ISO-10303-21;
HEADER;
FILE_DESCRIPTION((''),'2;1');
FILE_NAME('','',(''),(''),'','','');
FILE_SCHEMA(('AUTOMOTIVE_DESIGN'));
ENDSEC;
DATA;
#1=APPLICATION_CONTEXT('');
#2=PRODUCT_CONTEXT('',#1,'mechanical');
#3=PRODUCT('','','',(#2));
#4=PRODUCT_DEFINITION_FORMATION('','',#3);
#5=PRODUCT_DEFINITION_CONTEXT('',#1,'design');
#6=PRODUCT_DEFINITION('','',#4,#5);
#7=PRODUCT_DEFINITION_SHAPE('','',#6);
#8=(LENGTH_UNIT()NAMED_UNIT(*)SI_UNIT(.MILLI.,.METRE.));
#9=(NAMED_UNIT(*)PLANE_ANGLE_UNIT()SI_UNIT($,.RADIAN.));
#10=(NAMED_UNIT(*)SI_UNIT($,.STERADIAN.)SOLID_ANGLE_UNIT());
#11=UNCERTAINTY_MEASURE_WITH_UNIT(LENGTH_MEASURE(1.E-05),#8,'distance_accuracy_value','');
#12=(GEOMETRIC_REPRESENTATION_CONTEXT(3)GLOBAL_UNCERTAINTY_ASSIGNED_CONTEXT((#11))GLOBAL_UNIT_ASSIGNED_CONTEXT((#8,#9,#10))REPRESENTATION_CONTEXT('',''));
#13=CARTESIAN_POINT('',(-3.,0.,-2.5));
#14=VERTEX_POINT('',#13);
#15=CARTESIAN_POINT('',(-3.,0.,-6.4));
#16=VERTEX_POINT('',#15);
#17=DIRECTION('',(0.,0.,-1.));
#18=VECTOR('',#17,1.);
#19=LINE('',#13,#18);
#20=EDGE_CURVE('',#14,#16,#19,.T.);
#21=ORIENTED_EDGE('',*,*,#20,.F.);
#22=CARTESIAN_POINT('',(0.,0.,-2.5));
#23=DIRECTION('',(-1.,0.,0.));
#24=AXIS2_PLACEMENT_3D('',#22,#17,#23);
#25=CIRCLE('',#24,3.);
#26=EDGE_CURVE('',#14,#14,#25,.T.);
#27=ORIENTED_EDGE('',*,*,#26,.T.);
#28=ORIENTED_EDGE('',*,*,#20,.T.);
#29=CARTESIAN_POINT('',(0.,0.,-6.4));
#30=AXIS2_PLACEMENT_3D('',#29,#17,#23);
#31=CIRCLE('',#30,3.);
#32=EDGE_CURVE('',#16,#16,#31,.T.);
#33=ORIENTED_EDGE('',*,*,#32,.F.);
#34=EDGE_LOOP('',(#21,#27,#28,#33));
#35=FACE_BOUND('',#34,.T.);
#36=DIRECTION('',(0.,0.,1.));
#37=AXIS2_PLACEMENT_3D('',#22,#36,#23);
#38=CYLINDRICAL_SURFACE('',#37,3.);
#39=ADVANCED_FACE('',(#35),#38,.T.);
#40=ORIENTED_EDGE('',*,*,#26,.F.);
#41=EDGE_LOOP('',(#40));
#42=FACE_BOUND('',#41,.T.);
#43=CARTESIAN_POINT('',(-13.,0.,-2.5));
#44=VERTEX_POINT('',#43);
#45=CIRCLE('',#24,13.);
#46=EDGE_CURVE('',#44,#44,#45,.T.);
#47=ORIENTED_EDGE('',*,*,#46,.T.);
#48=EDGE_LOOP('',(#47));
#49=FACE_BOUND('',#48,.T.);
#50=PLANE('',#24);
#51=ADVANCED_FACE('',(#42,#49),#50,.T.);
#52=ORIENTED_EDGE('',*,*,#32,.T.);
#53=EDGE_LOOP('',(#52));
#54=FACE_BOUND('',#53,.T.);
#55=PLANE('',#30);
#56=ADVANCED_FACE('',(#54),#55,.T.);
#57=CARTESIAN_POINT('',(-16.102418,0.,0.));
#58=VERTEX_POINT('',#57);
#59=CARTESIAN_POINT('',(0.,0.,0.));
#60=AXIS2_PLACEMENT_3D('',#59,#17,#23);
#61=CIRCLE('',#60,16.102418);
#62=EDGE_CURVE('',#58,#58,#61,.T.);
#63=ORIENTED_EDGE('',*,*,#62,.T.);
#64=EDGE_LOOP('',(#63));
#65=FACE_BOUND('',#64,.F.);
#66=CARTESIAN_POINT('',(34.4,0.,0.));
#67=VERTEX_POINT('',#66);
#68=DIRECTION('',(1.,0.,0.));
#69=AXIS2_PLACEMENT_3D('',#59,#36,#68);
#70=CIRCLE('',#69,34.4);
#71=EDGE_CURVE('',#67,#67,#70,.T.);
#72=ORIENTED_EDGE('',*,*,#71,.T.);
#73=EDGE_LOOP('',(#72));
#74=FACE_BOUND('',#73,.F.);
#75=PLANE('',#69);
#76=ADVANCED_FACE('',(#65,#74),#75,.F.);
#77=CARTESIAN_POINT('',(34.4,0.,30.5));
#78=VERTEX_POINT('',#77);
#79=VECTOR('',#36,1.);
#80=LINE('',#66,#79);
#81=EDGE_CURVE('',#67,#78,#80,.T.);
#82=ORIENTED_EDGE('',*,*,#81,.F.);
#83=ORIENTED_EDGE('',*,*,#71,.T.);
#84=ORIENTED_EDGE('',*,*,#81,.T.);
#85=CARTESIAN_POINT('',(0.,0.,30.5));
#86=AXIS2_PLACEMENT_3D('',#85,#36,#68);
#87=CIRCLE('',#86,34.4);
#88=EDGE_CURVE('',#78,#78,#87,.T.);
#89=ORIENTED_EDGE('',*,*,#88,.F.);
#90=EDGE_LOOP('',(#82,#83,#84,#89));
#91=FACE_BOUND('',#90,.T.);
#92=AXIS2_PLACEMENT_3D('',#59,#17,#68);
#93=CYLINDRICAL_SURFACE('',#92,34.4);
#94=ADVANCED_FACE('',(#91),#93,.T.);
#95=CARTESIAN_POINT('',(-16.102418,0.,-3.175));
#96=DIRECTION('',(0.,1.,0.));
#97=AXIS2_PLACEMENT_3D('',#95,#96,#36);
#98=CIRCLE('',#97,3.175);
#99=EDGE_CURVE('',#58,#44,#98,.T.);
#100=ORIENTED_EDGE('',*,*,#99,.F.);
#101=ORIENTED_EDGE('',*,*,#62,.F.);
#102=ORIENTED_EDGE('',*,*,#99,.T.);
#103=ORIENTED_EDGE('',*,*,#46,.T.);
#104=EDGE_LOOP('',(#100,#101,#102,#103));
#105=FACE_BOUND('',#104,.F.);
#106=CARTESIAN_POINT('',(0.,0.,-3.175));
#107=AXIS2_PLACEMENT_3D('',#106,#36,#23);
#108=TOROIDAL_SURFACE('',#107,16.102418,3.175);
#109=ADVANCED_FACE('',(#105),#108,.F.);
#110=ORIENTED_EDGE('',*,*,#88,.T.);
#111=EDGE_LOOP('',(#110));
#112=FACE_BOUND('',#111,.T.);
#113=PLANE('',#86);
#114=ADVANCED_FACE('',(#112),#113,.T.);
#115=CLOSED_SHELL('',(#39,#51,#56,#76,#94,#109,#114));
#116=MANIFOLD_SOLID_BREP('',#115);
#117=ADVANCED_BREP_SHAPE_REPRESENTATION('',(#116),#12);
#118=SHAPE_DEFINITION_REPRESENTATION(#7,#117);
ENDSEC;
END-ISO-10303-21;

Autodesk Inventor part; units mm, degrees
ref_plane "YZ Plane" through (0, 0, 0) normal (1, 0, 0) x (0, 1, 0)
ref_plane "XZ Plane" through (0, 0, 0) normal (0, 1, 0) x (-1, 0, 0)
ref_plane "XY Plane" through (0, 0, 0) normal (0, 0, 1) x (1, 0, 0)
sketch "Sketch1" plane through (0, 0, 0) normal (0, 0, 1) x (1, 0, 0)
  circle A0 centre (0, 0) radius 34.4
  dimension "d0" = 68.8
extrude "Extrusion1" add sketch "Sketch1" along normal blind 30.5
sketch "Sketch2" plane through (0, 0, 0) normal (0, 0, -1) x (-1, 0, 0)
  circle A0 centre (0, 0) radius 13
  dimension "d3" = 26
extrude "Extrusion2" add sketch "Sketch2" along normal blind 2.5
sketch "Sketch3" plane through (0, 0, -2.5) normal (0, 0, -1) x (-1, 0, 0)
  circle A0 centre (0, 0) radius 3
  dimension "d6" = 6
extrude "Extrusion3" add sketch "Sketch3" along normal blind 3.9
fillet "Fillet1" radius 3.175 1 edges at (13, 0, 0)
properties part number "Motor" material "Copper"
